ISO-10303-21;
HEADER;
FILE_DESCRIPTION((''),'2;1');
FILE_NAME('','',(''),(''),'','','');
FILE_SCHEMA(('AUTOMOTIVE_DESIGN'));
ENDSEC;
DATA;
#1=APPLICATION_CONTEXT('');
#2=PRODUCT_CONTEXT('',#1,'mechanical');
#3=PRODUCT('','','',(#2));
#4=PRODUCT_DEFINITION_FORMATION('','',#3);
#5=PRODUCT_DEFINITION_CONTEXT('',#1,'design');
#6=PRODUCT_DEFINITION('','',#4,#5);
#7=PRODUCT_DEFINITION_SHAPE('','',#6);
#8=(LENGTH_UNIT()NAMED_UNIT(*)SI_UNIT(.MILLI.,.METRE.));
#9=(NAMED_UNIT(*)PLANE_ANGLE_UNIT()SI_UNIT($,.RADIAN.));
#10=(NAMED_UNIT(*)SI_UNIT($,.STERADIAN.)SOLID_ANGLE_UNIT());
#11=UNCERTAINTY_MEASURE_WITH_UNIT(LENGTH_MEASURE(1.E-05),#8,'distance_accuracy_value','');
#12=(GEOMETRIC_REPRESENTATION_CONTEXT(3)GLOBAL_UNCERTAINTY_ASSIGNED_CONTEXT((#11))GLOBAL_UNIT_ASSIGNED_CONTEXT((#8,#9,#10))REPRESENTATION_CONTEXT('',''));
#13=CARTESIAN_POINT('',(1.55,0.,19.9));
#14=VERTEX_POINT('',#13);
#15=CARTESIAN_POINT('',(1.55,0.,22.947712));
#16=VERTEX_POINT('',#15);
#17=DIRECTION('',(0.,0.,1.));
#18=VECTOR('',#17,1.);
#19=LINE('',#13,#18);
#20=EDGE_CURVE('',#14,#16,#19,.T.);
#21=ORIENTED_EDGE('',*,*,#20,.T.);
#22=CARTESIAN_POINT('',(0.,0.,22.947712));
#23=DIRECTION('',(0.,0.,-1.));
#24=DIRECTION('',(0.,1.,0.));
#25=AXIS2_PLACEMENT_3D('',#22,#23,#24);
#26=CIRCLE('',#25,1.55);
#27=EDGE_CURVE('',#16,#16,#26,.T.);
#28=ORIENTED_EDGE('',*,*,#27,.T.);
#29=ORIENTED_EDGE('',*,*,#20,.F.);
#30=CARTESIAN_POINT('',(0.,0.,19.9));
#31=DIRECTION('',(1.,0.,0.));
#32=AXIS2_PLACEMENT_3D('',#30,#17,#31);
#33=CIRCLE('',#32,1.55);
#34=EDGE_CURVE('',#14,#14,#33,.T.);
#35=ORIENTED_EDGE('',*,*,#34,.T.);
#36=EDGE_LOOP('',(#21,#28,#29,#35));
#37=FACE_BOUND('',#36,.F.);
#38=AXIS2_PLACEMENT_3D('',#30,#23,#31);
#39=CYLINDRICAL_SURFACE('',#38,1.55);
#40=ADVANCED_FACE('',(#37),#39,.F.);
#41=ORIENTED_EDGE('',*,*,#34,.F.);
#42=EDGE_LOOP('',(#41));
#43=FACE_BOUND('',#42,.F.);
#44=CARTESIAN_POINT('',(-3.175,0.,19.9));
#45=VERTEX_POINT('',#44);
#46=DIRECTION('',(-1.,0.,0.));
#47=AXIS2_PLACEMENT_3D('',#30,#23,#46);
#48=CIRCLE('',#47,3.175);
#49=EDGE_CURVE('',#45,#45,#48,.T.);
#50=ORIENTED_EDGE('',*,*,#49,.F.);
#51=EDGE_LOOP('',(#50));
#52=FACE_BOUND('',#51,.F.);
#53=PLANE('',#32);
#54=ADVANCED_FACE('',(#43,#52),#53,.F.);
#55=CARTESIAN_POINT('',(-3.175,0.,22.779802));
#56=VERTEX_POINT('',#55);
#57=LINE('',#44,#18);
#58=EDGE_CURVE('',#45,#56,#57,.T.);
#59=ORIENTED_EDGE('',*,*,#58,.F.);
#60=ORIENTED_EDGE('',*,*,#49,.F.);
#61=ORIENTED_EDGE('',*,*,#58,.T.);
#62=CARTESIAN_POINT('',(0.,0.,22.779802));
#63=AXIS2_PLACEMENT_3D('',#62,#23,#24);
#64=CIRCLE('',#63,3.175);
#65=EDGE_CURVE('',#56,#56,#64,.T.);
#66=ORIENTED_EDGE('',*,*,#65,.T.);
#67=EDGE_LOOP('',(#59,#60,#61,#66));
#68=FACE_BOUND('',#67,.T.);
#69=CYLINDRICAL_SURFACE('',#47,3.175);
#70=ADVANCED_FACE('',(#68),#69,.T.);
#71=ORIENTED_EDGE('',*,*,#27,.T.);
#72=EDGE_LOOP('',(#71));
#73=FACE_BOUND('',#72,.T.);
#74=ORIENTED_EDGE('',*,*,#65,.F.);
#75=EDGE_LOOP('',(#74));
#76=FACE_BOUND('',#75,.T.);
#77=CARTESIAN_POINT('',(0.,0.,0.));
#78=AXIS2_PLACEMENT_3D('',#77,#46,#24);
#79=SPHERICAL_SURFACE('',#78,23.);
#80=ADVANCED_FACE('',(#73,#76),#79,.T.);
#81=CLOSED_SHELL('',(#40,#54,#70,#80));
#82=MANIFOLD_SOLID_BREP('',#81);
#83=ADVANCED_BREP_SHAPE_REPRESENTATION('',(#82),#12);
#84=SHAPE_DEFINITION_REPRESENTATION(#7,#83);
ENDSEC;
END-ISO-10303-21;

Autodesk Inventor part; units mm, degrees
ref_plane "YZ Plane" through (0, 0, 0) normal (1, 0, 0) x (0, 1, 0)
ref_plane "XZ Plane" through (0, 0, 0) normal (0, 1, 0) x (-1, 0, 0)
sketch "Sketch1" plane through (0, 0, 0) normal (0, 0, 1) x (1, 0, 0)
  line L0 (-34.9979, 0) -> (51.0758, 0)
  arc A0 (23, 0) -> (-23, 0) centre (0, 0) ccw
  dimension "d0" = 46
revolve "Revolution1" add sketch "Sketch1" angle 360 about axis through (-34.9979, 0, 0) along (1, 0, 0)
ref_plane "Work Plane1" through (0, 0, 19.9) normal (0, 0, 1) x (1, 0, 0)
sketch "Sketch2" plane through (0, 0, 19.9) normal (0, 0, 1) x (1, 0, 0)
  circle A0 centre (0, 0) radius 11.5321 projected
extrude "Extrusion1" cut sketch "Sketch2" against normal through all
sketch "Sketch3" plane through (0, 0, 19.9) normal (0, 0, 1) x (1, 0, 0)
  circle A0 centre (0, 0) radius 27.1797
extrude "Extrusion2" cut sketch "Sketch3" against normal through all
sketch "Sketch4" plane through (0, 0, 19.9) normal (0, 0, 1) x (1, 0, 0)
  circle A0 centre (0, 0) radius 1.55
  dimension "d9" = 3.1
extrude "Extrusion3" cut sketch "Sketch4" along normal through all
sketch "Sketch5" plane through (0, 0, 19.9) normal (0, 0, -1) x (-1, 0, 0)
  circle A0 centre (0, 0) radius 11.5321 projected
  circle A1 centre (0, 0) radius 3.175
  dimension "d13" = 6.35
extrude "Extrusion4" cut sketch "Sketch5" against normal through all
properties part number "PVC Spacer"
